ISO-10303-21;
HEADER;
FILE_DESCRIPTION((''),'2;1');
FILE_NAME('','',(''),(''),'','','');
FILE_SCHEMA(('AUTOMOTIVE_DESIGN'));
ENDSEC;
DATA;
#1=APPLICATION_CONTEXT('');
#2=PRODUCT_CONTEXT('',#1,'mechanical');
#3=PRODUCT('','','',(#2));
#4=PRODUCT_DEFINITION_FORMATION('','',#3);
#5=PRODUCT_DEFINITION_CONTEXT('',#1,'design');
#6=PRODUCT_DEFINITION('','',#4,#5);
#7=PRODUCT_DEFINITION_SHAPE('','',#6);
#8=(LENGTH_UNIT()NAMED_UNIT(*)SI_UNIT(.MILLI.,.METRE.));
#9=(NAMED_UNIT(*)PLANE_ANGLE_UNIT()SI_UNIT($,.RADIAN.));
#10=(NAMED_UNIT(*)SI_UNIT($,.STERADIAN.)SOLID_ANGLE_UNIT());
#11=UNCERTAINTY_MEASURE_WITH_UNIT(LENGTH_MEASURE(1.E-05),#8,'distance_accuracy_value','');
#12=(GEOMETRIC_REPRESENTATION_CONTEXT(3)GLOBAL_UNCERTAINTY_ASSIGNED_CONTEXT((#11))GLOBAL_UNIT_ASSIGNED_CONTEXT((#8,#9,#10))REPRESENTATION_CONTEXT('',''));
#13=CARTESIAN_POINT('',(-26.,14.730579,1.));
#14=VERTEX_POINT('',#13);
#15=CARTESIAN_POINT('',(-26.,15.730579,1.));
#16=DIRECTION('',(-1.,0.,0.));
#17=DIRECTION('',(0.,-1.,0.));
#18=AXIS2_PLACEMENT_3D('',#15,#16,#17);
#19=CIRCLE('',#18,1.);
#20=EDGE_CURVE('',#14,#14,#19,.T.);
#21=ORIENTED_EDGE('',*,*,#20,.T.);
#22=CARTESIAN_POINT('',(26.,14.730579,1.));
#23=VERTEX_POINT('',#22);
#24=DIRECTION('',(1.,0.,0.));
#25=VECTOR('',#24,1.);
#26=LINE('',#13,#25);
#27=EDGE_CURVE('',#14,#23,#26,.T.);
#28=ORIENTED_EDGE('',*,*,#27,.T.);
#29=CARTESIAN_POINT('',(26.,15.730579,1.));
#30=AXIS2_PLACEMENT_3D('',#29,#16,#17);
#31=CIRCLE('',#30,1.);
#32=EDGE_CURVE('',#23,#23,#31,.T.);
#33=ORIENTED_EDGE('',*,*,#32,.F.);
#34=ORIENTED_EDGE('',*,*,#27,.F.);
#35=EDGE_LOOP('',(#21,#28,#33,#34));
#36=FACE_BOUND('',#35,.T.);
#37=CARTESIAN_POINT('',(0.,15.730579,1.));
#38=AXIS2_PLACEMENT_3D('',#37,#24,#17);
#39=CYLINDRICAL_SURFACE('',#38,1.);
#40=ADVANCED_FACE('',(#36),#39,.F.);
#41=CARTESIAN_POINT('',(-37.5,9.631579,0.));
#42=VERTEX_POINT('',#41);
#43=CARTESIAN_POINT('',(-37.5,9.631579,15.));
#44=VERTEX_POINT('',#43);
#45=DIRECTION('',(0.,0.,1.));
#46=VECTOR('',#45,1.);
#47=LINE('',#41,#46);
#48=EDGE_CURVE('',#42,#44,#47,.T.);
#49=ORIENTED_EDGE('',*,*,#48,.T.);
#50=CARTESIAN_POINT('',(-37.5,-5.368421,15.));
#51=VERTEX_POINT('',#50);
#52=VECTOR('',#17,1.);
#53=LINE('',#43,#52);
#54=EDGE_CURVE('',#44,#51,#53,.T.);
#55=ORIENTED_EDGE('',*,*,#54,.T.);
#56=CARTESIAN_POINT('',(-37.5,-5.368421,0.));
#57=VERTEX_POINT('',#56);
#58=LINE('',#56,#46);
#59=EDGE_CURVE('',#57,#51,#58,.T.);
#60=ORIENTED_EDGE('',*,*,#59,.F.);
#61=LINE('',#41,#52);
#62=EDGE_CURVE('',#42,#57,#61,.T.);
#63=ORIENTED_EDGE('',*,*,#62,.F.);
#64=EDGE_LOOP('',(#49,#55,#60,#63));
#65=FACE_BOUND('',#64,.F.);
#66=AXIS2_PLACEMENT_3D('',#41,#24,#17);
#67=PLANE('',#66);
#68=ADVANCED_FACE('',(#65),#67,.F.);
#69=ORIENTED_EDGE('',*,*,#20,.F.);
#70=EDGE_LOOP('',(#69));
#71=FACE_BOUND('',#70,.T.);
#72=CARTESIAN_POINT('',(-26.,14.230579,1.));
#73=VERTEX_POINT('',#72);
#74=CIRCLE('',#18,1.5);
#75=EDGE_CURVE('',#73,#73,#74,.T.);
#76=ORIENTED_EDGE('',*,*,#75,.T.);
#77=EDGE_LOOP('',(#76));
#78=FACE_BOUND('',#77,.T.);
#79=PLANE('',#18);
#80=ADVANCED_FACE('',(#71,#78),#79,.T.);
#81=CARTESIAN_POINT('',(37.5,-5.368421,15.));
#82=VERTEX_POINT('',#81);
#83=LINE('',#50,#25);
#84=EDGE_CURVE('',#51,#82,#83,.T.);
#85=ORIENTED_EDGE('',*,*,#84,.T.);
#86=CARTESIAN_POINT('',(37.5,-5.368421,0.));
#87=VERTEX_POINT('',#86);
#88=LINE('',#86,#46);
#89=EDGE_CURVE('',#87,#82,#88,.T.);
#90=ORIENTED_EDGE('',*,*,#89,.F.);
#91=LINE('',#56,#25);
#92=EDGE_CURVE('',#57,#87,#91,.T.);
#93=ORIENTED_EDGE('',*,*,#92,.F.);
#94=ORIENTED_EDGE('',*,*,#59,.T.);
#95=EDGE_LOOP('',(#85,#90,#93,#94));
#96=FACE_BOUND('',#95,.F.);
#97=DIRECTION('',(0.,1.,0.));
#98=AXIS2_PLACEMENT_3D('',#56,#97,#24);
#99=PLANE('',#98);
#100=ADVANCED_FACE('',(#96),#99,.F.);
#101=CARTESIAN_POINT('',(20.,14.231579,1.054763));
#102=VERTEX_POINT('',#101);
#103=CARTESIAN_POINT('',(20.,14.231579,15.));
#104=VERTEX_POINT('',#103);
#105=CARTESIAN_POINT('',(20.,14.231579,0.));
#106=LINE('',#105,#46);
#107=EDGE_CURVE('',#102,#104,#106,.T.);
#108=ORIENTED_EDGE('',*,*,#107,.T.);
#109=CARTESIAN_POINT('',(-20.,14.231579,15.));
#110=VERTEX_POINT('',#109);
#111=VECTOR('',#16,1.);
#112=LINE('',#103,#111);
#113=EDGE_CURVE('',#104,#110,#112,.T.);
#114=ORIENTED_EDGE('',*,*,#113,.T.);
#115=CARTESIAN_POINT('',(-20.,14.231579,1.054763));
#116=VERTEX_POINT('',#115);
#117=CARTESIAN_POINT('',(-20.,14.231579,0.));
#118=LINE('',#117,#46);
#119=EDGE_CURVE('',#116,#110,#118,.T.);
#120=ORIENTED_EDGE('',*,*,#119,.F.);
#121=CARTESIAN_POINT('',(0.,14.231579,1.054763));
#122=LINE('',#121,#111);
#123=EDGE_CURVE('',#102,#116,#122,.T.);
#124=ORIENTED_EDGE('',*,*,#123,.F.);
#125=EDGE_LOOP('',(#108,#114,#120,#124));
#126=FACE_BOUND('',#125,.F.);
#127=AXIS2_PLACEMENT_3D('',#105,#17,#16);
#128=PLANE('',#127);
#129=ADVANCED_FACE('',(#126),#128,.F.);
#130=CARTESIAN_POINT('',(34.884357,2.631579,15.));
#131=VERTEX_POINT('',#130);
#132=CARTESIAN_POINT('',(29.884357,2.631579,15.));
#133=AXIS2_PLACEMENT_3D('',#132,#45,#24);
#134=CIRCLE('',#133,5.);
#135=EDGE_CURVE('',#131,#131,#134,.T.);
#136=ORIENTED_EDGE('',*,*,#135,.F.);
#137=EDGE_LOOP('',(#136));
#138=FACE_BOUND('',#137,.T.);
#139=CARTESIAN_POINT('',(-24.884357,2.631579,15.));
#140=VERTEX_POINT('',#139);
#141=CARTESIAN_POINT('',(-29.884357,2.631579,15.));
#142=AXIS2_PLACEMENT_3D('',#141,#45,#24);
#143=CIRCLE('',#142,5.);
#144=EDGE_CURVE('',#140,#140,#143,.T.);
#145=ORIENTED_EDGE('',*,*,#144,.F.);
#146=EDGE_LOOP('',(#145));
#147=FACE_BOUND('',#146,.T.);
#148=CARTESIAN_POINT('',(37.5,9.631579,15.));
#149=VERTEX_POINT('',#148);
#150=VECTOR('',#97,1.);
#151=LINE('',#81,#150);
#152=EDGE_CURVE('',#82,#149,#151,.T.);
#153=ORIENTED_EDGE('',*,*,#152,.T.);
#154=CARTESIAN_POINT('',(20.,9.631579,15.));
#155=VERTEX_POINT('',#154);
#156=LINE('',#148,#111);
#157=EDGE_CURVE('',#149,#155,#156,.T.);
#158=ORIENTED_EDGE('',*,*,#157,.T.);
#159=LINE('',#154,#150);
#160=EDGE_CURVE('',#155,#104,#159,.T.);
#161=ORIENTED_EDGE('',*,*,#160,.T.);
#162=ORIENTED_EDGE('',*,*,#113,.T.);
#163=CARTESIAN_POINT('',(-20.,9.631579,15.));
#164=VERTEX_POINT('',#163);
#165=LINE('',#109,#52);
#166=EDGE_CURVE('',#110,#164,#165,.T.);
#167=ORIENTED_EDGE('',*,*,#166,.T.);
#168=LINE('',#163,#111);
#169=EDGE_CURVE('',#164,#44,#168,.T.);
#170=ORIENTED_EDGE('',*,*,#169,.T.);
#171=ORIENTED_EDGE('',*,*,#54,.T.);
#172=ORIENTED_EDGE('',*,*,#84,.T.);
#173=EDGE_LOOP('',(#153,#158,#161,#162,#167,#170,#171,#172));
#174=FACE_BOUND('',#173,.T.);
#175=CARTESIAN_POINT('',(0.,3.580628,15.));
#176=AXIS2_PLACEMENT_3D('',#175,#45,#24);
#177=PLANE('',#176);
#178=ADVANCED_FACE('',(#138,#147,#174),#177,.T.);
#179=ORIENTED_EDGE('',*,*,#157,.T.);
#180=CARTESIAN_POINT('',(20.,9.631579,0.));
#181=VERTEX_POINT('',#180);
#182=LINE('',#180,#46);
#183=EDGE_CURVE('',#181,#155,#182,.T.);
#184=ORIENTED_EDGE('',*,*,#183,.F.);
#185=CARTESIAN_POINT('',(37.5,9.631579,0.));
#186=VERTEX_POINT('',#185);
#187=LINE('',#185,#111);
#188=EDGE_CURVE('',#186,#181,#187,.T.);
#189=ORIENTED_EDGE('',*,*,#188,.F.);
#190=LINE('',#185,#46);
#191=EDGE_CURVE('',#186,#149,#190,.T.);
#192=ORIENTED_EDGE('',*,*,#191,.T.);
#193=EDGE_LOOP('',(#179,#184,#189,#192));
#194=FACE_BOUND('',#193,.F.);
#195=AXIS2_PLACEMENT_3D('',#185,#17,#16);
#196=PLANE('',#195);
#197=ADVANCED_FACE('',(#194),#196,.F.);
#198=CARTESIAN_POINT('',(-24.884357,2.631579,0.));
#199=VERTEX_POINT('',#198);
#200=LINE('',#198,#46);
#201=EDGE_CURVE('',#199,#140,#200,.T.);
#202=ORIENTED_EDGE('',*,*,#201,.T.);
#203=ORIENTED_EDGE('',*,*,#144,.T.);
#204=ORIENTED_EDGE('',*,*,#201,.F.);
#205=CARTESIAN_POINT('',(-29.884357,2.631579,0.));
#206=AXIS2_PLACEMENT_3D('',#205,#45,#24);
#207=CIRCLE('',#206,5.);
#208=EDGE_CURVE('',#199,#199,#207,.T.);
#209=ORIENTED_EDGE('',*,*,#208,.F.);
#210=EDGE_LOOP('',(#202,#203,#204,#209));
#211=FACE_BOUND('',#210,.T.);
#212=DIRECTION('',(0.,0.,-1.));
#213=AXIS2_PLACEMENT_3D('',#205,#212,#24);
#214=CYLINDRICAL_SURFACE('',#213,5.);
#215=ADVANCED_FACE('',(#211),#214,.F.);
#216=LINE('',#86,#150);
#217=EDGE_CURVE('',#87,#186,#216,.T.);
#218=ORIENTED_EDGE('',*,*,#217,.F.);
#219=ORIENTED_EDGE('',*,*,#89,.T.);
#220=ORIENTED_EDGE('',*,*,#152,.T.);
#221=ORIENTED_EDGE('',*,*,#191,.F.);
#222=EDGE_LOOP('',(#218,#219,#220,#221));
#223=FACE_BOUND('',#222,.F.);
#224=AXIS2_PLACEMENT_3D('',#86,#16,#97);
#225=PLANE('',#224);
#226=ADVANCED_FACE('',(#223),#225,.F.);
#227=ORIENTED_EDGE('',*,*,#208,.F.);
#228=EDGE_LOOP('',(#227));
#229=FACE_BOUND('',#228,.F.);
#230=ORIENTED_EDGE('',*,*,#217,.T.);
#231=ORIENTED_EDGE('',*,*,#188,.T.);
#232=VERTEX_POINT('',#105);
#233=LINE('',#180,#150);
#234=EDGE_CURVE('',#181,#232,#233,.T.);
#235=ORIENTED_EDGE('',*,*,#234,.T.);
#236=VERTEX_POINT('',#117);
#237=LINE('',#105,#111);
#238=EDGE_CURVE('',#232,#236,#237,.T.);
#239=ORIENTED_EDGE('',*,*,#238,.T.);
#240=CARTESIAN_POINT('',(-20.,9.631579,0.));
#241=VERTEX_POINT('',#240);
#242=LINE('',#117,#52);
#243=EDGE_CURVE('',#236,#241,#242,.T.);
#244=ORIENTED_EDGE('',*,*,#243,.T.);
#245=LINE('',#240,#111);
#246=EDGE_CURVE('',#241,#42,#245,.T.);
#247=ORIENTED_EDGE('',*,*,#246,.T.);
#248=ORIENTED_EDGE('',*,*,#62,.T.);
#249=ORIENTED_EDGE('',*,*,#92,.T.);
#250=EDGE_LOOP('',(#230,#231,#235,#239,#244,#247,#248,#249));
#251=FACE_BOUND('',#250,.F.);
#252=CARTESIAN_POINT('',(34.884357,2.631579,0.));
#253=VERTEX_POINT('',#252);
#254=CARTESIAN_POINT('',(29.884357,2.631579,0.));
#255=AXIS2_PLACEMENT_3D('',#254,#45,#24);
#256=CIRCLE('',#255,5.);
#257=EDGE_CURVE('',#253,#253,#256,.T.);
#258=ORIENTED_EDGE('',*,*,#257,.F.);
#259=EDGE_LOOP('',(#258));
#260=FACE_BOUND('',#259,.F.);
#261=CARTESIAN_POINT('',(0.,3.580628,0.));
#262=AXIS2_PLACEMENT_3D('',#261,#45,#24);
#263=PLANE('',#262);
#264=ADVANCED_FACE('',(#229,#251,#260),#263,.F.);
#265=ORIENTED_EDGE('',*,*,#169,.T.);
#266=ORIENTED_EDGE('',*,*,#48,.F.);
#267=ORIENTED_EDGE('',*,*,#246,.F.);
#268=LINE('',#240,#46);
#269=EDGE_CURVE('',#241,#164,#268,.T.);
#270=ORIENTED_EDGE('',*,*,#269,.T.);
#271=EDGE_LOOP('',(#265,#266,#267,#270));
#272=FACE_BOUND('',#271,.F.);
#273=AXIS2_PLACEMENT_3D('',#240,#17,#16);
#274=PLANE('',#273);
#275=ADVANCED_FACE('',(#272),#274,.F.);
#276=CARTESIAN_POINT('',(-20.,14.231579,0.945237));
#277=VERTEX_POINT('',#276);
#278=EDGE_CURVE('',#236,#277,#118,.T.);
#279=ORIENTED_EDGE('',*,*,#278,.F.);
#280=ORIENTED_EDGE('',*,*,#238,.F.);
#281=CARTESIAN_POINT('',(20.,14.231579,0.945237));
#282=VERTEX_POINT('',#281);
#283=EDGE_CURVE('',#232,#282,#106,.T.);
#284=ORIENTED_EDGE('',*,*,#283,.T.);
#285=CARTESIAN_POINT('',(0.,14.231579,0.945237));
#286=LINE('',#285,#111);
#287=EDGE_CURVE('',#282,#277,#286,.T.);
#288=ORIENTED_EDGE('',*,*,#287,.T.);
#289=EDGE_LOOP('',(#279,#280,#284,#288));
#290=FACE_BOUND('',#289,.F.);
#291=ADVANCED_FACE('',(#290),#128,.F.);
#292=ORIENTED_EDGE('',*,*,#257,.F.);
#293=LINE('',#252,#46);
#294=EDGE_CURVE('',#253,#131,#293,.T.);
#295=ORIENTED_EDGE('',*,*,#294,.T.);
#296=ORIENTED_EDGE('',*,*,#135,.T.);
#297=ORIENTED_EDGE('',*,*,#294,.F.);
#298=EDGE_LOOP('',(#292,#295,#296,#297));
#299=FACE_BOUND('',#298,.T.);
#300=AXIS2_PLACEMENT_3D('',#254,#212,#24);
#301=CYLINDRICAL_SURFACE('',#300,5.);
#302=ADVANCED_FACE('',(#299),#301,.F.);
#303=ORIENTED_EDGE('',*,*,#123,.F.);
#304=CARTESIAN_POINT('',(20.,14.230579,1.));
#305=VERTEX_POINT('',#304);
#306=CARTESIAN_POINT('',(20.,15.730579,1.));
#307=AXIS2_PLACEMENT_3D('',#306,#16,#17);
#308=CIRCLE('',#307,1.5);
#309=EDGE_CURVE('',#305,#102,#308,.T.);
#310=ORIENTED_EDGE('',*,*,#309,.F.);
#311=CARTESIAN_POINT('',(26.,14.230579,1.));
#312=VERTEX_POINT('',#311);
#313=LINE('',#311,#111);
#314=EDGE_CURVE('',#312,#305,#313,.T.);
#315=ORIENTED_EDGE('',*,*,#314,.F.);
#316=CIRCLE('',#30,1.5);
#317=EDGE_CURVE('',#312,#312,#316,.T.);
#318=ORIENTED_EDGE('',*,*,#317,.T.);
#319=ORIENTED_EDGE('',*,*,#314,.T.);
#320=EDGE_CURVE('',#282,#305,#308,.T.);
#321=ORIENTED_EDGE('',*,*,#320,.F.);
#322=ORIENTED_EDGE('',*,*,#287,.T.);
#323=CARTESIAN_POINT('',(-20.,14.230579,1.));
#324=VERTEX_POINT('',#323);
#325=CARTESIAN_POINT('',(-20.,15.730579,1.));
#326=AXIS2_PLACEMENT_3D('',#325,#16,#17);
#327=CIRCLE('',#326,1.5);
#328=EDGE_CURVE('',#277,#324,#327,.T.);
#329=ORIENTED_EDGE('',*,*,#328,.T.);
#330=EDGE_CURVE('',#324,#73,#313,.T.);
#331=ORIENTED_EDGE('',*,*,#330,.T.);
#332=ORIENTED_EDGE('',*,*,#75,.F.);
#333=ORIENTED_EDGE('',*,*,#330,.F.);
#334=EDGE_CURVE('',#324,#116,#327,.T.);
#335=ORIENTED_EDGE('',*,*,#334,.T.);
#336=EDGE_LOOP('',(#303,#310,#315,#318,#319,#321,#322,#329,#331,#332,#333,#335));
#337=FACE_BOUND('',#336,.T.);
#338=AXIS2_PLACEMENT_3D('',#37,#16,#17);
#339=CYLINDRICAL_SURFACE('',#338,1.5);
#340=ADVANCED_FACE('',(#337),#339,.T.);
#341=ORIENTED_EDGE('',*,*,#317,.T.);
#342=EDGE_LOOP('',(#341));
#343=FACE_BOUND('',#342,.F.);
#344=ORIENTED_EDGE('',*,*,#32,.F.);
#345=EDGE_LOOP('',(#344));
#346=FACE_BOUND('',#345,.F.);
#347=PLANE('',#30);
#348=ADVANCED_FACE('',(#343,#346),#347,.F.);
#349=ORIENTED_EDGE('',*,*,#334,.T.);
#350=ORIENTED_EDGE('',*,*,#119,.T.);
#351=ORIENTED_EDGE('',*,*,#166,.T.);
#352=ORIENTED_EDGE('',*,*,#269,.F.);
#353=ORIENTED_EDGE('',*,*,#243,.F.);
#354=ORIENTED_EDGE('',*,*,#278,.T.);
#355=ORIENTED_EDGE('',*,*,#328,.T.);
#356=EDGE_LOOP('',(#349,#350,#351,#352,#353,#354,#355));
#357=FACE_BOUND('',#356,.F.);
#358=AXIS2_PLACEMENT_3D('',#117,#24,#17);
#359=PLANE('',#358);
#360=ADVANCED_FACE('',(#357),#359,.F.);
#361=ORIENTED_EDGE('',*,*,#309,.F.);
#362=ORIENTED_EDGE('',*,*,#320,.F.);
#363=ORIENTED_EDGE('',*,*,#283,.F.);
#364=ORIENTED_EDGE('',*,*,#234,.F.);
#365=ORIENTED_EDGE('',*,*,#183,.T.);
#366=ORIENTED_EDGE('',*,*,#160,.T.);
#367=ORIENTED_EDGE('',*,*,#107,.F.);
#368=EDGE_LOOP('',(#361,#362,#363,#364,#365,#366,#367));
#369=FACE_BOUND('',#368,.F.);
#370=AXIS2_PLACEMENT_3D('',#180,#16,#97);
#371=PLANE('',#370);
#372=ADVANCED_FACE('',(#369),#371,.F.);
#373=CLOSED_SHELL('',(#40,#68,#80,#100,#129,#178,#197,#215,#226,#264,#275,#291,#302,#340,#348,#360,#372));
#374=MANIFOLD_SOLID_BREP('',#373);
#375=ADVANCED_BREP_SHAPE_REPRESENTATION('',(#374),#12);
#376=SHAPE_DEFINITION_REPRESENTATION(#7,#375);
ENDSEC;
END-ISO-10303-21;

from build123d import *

# Parameters (mm, degrees)
F0_R     = 5
F1_DEPTH = 15
F3_R     = 1.5
F3_R_2   = 1
F4_DEPTH = 26


# Not quite as in the source:
# - a feature names something its author has since deleted; it is built from what else it names


with BuildPart() as f1:
    # F0 (on Top) → F1 (new body)
    with BuildSketch(Plane.XY):
        Polygon((-37.5, 9.6315789474), (-37.5, -5.3684210526), (37.5, -5.3684210526), (37.5, 9.6315789474), (20, 9.6315789474), (20, 14.2315789474), (-20, 14.2315789474), (-20, 9.6315789474), align=None)
        with Locations((-29.8843569823, 2.6315789474)):
            Circle(F0_R, mode=Mode.SUBTRACT)
        with Locations((29.8843569823, 2.6315789474)):
            Circle(F0_R, mode=Mode.SUBTRACT)
    extrude(amount=F1_DEPTH)

    # F3 (on offset) → F4 (join, symmetric)
    with BuildSketch(Plane(origin=(0, 0, 0), x_dir=(0, -1, 0), z_dir=(-1, 0, 0))):
        with Locations((-15.7305789474, 1)):
            Circle(F3_R)
        with Locations((-15.7305789474, 1)):
            Circle(F3_R_2, mode=Mode.SUBTRACT)
    extrude(amount=F4_DEPTH, both=True)


solid = f1.part
